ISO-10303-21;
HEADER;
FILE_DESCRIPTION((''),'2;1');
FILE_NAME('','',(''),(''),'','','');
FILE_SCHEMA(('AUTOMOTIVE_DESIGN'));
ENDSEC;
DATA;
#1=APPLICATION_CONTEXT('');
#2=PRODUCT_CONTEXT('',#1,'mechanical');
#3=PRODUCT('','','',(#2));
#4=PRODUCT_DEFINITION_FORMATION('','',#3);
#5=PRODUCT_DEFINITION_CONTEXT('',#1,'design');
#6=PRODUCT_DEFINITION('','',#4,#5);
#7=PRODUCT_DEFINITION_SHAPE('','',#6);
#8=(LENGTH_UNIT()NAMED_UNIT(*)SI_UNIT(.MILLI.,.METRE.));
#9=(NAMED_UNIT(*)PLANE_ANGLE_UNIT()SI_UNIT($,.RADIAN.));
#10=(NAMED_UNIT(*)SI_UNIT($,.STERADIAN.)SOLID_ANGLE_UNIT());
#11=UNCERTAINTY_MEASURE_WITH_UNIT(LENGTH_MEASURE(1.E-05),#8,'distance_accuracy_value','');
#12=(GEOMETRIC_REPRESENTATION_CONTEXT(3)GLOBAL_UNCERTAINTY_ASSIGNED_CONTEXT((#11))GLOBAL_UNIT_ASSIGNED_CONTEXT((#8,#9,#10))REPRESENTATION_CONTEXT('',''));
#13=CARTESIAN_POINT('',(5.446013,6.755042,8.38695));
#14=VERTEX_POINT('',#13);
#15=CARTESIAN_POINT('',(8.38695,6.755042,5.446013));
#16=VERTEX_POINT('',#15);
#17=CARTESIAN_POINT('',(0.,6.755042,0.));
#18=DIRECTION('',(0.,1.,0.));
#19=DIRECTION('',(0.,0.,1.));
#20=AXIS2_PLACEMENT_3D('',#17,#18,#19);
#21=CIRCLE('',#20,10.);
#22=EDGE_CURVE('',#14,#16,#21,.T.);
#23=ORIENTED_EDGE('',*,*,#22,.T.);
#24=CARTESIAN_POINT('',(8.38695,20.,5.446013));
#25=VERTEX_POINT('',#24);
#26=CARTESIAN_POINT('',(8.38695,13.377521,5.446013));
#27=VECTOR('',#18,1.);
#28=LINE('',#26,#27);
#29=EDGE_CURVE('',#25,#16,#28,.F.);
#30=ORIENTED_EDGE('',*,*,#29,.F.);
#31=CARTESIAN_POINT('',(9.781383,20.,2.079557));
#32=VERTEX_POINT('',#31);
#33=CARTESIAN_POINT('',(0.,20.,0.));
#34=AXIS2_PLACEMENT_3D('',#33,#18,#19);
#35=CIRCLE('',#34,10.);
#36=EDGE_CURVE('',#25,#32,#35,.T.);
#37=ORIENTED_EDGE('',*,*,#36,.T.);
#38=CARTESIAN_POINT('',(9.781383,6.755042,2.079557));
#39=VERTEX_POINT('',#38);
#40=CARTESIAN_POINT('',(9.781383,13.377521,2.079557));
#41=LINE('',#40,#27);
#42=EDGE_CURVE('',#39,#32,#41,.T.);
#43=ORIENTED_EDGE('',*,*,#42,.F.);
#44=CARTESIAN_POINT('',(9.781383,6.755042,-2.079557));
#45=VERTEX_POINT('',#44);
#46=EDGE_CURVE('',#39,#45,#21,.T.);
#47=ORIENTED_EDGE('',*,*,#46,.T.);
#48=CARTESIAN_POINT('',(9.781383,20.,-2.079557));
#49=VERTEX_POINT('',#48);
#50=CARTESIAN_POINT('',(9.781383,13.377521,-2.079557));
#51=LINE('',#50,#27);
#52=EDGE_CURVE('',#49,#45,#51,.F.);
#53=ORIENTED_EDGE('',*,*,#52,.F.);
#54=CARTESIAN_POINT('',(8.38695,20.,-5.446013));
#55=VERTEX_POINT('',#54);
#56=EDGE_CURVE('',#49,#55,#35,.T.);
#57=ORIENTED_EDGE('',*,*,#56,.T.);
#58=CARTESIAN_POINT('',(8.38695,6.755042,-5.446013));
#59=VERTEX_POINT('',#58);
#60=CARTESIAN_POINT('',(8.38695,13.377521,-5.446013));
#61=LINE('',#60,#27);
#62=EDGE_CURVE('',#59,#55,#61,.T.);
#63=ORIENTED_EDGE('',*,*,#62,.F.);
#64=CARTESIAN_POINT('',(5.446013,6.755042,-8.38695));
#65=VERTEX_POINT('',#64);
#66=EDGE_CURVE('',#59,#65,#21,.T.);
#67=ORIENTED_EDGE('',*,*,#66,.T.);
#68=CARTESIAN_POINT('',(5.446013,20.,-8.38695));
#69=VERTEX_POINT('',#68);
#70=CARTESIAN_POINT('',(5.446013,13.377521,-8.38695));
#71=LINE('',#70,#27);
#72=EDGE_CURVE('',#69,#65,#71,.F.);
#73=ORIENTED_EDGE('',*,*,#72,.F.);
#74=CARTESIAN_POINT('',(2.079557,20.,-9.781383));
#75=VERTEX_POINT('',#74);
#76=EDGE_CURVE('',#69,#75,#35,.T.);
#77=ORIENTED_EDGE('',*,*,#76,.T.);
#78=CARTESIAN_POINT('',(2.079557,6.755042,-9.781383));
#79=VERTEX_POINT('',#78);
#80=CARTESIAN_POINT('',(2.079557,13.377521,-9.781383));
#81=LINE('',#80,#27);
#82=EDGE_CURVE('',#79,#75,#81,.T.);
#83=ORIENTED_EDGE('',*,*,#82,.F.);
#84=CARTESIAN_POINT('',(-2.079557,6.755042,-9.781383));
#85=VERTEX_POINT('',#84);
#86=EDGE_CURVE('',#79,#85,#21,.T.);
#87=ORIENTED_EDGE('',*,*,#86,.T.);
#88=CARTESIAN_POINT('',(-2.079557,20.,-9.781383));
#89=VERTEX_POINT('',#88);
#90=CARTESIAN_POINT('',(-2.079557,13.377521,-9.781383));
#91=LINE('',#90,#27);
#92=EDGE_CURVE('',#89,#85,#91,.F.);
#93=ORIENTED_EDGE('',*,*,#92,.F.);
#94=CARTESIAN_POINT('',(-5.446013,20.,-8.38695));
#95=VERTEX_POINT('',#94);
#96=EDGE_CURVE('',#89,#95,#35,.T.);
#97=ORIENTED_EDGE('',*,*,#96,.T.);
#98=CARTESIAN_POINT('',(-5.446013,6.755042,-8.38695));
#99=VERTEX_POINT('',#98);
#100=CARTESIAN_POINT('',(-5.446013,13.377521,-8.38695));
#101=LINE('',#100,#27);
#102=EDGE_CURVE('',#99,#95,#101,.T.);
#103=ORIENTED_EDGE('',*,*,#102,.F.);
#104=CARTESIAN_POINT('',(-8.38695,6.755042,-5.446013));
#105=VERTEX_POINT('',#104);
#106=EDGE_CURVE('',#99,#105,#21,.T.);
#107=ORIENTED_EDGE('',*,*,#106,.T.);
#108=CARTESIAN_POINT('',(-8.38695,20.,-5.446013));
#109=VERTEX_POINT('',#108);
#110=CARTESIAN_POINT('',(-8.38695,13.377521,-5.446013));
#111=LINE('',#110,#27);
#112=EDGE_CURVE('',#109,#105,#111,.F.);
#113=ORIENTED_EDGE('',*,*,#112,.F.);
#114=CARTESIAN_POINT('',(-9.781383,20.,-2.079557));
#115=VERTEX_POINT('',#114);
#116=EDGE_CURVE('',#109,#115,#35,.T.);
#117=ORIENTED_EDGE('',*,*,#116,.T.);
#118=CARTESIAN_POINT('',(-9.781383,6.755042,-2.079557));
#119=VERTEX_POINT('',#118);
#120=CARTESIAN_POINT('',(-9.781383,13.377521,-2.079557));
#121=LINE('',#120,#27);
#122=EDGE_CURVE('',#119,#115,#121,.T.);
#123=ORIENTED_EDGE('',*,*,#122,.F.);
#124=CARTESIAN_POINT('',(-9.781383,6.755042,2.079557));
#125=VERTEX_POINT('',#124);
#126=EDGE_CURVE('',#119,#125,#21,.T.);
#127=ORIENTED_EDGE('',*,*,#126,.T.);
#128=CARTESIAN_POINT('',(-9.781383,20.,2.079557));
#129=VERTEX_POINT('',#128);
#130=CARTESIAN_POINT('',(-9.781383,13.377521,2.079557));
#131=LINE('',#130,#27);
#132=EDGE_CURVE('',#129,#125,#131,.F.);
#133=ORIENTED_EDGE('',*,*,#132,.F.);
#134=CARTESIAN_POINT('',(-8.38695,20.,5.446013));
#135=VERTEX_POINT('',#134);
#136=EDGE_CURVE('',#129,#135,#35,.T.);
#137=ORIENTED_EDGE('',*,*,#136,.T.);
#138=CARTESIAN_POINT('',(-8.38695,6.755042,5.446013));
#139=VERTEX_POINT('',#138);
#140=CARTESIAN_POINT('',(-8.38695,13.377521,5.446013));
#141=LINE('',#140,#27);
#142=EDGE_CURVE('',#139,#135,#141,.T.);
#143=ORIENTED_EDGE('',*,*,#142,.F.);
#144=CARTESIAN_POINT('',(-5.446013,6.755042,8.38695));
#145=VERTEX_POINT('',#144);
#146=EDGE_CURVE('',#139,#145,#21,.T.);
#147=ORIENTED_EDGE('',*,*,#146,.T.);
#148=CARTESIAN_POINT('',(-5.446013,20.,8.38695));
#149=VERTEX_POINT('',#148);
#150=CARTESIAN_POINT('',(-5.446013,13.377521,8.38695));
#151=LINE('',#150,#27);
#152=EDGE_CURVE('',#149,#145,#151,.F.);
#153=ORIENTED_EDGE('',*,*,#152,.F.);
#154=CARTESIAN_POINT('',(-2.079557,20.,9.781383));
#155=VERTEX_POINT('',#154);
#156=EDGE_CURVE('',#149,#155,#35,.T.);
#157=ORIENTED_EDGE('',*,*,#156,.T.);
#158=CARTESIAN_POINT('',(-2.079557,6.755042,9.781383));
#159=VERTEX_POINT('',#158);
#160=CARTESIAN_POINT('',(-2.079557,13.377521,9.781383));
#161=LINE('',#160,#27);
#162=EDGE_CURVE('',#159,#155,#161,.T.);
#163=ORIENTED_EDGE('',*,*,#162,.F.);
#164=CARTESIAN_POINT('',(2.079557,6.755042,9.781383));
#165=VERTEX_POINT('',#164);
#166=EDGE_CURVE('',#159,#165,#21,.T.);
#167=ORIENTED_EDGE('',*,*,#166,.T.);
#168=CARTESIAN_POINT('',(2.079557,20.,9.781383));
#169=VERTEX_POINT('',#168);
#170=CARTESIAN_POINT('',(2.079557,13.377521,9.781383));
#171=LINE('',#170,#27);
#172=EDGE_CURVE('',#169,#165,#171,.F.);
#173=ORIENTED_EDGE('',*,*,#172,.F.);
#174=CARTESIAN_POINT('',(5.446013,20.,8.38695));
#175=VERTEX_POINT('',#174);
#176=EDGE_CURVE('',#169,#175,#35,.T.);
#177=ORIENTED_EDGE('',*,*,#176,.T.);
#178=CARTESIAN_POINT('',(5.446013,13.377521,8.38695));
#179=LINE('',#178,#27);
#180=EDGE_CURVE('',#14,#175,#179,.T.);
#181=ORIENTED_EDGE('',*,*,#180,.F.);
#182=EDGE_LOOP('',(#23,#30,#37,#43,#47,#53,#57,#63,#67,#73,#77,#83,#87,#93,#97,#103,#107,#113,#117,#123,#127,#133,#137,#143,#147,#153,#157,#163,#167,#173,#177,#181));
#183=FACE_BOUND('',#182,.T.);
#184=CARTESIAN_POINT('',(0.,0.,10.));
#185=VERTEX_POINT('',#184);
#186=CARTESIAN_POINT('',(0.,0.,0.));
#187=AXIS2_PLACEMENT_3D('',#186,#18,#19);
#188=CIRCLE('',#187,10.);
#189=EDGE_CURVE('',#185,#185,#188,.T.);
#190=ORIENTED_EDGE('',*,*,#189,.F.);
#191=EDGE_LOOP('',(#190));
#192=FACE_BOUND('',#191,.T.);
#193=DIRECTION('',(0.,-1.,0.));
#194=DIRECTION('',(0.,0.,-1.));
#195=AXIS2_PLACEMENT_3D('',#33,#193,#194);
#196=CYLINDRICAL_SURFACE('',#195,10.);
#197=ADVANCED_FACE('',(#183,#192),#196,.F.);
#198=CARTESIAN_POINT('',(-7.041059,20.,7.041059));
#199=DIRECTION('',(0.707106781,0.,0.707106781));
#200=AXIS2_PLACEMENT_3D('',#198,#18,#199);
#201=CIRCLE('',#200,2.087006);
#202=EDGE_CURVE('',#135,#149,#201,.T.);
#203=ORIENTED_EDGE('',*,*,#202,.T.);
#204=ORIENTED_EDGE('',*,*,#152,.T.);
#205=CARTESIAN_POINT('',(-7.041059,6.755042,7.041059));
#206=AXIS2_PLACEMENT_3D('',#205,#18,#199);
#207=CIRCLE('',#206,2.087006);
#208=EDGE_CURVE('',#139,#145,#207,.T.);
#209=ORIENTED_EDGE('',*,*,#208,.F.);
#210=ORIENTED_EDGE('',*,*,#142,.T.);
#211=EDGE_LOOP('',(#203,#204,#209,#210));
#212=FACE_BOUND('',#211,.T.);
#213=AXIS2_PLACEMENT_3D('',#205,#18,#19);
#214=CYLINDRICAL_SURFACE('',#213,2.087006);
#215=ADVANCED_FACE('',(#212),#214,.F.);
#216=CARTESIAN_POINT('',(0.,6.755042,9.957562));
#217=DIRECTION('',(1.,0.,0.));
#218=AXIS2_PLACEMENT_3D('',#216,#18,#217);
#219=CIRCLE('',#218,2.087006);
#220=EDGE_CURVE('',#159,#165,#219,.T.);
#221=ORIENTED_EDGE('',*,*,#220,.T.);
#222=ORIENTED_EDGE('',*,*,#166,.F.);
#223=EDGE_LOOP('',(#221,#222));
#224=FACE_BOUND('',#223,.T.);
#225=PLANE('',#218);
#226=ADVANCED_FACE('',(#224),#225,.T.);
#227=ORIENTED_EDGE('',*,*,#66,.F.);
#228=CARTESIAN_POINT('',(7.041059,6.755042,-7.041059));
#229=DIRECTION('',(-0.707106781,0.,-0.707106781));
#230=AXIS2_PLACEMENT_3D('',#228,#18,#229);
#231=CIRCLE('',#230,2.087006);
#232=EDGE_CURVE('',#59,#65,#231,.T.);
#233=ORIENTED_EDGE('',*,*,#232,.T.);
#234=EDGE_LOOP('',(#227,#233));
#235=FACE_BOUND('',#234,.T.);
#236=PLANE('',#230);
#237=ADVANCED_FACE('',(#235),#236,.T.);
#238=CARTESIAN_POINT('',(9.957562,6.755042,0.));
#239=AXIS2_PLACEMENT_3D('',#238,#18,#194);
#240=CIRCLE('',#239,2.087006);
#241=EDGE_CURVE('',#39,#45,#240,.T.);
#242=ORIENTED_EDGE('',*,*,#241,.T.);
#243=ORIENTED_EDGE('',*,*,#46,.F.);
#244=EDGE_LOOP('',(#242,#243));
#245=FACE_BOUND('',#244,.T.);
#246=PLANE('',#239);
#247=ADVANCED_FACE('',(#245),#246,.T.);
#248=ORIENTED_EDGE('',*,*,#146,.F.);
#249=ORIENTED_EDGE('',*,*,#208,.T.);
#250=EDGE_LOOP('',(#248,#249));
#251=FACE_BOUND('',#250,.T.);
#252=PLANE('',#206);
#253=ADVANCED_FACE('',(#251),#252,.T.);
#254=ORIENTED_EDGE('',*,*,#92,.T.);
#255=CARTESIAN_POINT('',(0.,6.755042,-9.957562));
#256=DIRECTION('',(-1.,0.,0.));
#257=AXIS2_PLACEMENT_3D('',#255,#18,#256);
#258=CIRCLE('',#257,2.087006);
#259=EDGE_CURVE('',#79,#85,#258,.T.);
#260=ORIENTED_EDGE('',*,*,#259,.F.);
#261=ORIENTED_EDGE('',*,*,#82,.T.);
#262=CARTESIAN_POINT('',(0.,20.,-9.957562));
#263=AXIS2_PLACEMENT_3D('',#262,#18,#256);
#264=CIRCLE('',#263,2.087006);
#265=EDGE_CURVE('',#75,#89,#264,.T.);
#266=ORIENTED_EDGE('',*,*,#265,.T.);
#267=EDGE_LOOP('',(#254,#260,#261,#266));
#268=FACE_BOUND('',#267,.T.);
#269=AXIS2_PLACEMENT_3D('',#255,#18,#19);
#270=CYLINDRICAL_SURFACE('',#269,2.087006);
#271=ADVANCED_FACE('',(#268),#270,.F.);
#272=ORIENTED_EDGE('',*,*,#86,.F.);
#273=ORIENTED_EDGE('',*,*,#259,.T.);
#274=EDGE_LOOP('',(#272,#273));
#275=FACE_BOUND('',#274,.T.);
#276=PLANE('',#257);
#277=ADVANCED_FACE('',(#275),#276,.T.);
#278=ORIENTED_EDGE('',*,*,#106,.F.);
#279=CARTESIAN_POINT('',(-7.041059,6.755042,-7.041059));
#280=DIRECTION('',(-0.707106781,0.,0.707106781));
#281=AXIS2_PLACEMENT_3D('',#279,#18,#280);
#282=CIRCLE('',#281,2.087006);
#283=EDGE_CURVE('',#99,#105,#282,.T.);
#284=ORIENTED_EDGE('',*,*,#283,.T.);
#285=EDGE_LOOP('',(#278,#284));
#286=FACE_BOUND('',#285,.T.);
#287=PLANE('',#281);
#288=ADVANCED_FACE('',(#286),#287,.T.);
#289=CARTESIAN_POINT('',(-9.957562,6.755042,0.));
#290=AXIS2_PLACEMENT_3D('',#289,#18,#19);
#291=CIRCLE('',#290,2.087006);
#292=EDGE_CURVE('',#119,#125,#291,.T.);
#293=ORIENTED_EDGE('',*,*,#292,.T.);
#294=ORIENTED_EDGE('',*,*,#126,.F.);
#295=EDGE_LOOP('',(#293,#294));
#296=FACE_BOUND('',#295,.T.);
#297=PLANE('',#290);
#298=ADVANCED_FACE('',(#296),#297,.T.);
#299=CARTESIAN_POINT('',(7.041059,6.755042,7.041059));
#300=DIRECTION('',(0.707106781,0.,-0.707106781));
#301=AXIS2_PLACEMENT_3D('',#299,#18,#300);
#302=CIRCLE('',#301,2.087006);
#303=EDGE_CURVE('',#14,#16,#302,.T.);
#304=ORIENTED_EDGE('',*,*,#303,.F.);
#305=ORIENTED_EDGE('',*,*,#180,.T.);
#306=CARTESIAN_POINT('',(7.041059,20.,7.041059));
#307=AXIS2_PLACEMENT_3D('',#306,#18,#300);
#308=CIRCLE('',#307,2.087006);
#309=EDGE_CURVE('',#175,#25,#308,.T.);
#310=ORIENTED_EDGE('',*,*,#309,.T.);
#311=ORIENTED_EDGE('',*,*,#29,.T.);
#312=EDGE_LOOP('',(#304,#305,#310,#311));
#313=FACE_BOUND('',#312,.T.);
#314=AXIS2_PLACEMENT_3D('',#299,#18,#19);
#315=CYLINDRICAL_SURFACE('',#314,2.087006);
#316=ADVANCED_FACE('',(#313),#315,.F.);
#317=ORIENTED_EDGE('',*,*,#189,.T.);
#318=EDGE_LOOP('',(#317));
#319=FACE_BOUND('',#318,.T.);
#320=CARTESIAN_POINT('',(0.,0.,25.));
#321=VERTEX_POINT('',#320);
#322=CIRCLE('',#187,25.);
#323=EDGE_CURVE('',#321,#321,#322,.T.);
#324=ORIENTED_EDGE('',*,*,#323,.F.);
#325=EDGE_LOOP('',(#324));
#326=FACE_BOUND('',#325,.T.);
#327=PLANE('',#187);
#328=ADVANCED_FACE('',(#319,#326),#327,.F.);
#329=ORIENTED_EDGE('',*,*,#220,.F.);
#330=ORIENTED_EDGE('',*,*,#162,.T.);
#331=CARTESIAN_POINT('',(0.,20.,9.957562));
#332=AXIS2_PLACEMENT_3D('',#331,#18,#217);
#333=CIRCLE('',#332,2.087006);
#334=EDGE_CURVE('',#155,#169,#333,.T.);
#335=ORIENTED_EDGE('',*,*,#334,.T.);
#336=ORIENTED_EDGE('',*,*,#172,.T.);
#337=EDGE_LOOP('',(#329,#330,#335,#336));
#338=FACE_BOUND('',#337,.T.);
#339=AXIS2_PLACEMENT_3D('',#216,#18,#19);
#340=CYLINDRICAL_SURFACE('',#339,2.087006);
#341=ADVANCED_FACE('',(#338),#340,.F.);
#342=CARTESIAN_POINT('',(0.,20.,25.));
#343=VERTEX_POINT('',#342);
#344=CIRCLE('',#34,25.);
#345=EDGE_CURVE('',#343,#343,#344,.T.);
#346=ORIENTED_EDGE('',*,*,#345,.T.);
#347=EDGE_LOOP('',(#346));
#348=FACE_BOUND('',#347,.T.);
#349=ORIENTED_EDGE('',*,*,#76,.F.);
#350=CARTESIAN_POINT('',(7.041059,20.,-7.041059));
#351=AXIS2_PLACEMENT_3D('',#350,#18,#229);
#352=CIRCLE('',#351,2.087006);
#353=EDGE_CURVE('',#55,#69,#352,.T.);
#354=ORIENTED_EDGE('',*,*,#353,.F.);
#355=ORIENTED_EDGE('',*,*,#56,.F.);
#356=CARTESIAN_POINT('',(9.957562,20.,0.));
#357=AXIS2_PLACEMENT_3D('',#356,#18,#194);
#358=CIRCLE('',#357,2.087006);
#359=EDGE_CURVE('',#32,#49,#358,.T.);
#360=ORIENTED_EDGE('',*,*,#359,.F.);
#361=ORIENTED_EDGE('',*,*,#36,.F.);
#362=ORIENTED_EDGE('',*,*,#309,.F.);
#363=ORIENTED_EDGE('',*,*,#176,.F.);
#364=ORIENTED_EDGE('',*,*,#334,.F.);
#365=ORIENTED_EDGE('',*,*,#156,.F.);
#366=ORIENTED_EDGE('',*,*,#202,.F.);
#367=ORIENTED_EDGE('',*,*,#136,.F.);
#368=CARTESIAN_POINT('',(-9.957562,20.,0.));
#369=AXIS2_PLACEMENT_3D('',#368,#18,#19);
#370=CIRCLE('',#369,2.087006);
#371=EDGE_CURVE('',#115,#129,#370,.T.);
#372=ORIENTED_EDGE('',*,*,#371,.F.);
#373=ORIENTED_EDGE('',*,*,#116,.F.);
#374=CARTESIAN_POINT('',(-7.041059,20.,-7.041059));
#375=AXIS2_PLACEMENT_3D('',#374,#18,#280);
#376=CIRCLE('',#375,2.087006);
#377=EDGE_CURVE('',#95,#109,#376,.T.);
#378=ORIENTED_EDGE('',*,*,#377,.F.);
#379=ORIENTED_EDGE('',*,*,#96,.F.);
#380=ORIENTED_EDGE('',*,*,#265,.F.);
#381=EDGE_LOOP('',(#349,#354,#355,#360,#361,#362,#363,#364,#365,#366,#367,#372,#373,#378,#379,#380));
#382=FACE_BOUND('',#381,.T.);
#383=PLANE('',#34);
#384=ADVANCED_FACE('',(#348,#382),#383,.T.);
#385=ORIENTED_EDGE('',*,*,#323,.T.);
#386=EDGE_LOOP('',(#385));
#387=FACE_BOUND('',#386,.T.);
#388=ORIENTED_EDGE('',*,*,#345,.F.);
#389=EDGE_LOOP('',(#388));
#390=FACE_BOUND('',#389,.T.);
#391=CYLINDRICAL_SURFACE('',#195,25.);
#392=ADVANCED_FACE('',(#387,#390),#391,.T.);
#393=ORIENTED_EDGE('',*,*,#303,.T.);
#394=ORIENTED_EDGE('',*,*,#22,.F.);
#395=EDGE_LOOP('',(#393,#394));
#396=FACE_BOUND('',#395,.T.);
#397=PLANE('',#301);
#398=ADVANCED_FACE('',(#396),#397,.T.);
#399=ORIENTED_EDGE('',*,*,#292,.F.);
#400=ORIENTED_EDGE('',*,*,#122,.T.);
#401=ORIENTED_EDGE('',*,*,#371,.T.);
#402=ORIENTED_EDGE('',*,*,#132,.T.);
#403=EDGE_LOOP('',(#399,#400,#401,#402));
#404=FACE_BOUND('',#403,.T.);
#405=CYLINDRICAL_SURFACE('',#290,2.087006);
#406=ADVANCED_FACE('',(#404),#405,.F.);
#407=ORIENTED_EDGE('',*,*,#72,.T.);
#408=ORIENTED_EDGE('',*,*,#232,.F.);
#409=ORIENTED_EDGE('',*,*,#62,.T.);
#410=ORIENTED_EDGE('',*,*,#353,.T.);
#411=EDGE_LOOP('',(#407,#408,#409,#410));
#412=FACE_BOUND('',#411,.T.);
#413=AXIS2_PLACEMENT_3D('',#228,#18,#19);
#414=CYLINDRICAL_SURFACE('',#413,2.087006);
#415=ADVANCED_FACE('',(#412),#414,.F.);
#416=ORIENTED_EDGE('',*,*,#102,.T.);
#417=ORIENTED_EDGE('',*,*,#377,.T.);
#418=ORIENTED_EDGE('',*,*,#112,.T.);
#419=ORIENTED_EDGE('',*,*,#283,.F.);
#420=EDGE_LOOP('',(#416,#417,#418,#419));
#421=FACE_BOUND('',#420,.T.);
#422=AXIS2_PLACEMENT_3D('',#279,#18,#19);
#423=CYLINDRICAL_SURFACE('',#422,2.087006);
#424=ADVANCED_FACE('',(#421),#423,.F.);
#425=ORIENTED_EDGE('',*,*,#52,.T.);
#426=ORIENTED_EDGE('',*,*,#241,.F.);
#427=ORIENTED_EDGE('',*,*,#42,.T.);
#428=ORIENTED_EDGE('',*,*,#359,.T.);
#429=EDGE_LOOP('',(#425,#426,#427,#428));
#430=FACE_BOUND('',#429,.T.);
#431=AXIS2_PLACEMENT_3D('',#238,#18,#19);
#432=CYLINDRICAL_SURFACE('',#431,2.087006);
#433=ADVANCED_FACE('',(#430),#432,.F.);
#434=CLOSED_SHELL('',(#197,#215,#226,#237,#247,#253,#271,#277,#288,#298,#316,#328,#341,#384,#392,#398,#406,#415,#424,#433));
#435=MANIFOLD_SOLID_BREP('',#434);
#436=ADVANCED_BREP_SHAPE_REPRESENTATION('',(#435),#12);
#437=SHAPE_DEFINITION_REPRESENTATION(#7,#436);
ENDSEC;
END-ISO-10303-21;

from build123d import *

# Parameters (mm, degrees)
SKETCH1_R           = 25
BOSS_EXTRUDE1_DEPTH = 20
SKETCH2_R           = 10
CUT_EXTRUDE1_DEPTH  = 41.620192023
SKETCH3_R           = 2.087006148
CUT_EXTRUDE2_DEPTH  = 13.24495835
CIRPATTERN1_COUNT   = 8


with BuildPart() as part:
    # Sketch1 → Boss-Extrude1 (new body)
    with BuildSketch(Plane(origin=(0, 0, 0), x_dir=(1, 0, 0), z_dir=(0, 1, 0))):
        Circle(SKETCH1_R)
    extrude(amount=BOSS_EXTRUDE1_DEPTH)

    # Sketch2 → Cut-Extrude1 (cut, through all)
    with BuildSketch(Plane(origin=(0, 0, 0), x_dir=(1, 0, 0), z_dir=(0, 1, 0))):
        Circle(SKETCH2_R)
    extrude(amount=CUT_EXTRUDE1_DEPTH, mode=Mode.SUBTRACT)

    # Sketch3 → Cut-Extrude2 (cut)
    with BuildSketch(Plane(origin=(0, 20, 0), x_dir=(1, 0, 0), z_dir=(0, 1, 0))):
        with Locations((-9.957561581, 0)):
            Circle(SKETCH3_R)
    cut_extrude2 = extrude(amount=-CUT_EXTRUDE2_DEPTH, mode=Mode.SUBTRACT)

    # CirPattern1: Cut-Extrude2 ×8 about axis
    cirpattern1_axis = Axis((0, 0, 0), (0, 1, 0))
    for i in range(1, CIRPATTERN1_COUNT):
        add(cut_extrude2.rotate(cirpattern1_axis, i * 360 / CIRPATTERN1_COUNT), mode=Mode.SUBTRACT)


solid = part.part
